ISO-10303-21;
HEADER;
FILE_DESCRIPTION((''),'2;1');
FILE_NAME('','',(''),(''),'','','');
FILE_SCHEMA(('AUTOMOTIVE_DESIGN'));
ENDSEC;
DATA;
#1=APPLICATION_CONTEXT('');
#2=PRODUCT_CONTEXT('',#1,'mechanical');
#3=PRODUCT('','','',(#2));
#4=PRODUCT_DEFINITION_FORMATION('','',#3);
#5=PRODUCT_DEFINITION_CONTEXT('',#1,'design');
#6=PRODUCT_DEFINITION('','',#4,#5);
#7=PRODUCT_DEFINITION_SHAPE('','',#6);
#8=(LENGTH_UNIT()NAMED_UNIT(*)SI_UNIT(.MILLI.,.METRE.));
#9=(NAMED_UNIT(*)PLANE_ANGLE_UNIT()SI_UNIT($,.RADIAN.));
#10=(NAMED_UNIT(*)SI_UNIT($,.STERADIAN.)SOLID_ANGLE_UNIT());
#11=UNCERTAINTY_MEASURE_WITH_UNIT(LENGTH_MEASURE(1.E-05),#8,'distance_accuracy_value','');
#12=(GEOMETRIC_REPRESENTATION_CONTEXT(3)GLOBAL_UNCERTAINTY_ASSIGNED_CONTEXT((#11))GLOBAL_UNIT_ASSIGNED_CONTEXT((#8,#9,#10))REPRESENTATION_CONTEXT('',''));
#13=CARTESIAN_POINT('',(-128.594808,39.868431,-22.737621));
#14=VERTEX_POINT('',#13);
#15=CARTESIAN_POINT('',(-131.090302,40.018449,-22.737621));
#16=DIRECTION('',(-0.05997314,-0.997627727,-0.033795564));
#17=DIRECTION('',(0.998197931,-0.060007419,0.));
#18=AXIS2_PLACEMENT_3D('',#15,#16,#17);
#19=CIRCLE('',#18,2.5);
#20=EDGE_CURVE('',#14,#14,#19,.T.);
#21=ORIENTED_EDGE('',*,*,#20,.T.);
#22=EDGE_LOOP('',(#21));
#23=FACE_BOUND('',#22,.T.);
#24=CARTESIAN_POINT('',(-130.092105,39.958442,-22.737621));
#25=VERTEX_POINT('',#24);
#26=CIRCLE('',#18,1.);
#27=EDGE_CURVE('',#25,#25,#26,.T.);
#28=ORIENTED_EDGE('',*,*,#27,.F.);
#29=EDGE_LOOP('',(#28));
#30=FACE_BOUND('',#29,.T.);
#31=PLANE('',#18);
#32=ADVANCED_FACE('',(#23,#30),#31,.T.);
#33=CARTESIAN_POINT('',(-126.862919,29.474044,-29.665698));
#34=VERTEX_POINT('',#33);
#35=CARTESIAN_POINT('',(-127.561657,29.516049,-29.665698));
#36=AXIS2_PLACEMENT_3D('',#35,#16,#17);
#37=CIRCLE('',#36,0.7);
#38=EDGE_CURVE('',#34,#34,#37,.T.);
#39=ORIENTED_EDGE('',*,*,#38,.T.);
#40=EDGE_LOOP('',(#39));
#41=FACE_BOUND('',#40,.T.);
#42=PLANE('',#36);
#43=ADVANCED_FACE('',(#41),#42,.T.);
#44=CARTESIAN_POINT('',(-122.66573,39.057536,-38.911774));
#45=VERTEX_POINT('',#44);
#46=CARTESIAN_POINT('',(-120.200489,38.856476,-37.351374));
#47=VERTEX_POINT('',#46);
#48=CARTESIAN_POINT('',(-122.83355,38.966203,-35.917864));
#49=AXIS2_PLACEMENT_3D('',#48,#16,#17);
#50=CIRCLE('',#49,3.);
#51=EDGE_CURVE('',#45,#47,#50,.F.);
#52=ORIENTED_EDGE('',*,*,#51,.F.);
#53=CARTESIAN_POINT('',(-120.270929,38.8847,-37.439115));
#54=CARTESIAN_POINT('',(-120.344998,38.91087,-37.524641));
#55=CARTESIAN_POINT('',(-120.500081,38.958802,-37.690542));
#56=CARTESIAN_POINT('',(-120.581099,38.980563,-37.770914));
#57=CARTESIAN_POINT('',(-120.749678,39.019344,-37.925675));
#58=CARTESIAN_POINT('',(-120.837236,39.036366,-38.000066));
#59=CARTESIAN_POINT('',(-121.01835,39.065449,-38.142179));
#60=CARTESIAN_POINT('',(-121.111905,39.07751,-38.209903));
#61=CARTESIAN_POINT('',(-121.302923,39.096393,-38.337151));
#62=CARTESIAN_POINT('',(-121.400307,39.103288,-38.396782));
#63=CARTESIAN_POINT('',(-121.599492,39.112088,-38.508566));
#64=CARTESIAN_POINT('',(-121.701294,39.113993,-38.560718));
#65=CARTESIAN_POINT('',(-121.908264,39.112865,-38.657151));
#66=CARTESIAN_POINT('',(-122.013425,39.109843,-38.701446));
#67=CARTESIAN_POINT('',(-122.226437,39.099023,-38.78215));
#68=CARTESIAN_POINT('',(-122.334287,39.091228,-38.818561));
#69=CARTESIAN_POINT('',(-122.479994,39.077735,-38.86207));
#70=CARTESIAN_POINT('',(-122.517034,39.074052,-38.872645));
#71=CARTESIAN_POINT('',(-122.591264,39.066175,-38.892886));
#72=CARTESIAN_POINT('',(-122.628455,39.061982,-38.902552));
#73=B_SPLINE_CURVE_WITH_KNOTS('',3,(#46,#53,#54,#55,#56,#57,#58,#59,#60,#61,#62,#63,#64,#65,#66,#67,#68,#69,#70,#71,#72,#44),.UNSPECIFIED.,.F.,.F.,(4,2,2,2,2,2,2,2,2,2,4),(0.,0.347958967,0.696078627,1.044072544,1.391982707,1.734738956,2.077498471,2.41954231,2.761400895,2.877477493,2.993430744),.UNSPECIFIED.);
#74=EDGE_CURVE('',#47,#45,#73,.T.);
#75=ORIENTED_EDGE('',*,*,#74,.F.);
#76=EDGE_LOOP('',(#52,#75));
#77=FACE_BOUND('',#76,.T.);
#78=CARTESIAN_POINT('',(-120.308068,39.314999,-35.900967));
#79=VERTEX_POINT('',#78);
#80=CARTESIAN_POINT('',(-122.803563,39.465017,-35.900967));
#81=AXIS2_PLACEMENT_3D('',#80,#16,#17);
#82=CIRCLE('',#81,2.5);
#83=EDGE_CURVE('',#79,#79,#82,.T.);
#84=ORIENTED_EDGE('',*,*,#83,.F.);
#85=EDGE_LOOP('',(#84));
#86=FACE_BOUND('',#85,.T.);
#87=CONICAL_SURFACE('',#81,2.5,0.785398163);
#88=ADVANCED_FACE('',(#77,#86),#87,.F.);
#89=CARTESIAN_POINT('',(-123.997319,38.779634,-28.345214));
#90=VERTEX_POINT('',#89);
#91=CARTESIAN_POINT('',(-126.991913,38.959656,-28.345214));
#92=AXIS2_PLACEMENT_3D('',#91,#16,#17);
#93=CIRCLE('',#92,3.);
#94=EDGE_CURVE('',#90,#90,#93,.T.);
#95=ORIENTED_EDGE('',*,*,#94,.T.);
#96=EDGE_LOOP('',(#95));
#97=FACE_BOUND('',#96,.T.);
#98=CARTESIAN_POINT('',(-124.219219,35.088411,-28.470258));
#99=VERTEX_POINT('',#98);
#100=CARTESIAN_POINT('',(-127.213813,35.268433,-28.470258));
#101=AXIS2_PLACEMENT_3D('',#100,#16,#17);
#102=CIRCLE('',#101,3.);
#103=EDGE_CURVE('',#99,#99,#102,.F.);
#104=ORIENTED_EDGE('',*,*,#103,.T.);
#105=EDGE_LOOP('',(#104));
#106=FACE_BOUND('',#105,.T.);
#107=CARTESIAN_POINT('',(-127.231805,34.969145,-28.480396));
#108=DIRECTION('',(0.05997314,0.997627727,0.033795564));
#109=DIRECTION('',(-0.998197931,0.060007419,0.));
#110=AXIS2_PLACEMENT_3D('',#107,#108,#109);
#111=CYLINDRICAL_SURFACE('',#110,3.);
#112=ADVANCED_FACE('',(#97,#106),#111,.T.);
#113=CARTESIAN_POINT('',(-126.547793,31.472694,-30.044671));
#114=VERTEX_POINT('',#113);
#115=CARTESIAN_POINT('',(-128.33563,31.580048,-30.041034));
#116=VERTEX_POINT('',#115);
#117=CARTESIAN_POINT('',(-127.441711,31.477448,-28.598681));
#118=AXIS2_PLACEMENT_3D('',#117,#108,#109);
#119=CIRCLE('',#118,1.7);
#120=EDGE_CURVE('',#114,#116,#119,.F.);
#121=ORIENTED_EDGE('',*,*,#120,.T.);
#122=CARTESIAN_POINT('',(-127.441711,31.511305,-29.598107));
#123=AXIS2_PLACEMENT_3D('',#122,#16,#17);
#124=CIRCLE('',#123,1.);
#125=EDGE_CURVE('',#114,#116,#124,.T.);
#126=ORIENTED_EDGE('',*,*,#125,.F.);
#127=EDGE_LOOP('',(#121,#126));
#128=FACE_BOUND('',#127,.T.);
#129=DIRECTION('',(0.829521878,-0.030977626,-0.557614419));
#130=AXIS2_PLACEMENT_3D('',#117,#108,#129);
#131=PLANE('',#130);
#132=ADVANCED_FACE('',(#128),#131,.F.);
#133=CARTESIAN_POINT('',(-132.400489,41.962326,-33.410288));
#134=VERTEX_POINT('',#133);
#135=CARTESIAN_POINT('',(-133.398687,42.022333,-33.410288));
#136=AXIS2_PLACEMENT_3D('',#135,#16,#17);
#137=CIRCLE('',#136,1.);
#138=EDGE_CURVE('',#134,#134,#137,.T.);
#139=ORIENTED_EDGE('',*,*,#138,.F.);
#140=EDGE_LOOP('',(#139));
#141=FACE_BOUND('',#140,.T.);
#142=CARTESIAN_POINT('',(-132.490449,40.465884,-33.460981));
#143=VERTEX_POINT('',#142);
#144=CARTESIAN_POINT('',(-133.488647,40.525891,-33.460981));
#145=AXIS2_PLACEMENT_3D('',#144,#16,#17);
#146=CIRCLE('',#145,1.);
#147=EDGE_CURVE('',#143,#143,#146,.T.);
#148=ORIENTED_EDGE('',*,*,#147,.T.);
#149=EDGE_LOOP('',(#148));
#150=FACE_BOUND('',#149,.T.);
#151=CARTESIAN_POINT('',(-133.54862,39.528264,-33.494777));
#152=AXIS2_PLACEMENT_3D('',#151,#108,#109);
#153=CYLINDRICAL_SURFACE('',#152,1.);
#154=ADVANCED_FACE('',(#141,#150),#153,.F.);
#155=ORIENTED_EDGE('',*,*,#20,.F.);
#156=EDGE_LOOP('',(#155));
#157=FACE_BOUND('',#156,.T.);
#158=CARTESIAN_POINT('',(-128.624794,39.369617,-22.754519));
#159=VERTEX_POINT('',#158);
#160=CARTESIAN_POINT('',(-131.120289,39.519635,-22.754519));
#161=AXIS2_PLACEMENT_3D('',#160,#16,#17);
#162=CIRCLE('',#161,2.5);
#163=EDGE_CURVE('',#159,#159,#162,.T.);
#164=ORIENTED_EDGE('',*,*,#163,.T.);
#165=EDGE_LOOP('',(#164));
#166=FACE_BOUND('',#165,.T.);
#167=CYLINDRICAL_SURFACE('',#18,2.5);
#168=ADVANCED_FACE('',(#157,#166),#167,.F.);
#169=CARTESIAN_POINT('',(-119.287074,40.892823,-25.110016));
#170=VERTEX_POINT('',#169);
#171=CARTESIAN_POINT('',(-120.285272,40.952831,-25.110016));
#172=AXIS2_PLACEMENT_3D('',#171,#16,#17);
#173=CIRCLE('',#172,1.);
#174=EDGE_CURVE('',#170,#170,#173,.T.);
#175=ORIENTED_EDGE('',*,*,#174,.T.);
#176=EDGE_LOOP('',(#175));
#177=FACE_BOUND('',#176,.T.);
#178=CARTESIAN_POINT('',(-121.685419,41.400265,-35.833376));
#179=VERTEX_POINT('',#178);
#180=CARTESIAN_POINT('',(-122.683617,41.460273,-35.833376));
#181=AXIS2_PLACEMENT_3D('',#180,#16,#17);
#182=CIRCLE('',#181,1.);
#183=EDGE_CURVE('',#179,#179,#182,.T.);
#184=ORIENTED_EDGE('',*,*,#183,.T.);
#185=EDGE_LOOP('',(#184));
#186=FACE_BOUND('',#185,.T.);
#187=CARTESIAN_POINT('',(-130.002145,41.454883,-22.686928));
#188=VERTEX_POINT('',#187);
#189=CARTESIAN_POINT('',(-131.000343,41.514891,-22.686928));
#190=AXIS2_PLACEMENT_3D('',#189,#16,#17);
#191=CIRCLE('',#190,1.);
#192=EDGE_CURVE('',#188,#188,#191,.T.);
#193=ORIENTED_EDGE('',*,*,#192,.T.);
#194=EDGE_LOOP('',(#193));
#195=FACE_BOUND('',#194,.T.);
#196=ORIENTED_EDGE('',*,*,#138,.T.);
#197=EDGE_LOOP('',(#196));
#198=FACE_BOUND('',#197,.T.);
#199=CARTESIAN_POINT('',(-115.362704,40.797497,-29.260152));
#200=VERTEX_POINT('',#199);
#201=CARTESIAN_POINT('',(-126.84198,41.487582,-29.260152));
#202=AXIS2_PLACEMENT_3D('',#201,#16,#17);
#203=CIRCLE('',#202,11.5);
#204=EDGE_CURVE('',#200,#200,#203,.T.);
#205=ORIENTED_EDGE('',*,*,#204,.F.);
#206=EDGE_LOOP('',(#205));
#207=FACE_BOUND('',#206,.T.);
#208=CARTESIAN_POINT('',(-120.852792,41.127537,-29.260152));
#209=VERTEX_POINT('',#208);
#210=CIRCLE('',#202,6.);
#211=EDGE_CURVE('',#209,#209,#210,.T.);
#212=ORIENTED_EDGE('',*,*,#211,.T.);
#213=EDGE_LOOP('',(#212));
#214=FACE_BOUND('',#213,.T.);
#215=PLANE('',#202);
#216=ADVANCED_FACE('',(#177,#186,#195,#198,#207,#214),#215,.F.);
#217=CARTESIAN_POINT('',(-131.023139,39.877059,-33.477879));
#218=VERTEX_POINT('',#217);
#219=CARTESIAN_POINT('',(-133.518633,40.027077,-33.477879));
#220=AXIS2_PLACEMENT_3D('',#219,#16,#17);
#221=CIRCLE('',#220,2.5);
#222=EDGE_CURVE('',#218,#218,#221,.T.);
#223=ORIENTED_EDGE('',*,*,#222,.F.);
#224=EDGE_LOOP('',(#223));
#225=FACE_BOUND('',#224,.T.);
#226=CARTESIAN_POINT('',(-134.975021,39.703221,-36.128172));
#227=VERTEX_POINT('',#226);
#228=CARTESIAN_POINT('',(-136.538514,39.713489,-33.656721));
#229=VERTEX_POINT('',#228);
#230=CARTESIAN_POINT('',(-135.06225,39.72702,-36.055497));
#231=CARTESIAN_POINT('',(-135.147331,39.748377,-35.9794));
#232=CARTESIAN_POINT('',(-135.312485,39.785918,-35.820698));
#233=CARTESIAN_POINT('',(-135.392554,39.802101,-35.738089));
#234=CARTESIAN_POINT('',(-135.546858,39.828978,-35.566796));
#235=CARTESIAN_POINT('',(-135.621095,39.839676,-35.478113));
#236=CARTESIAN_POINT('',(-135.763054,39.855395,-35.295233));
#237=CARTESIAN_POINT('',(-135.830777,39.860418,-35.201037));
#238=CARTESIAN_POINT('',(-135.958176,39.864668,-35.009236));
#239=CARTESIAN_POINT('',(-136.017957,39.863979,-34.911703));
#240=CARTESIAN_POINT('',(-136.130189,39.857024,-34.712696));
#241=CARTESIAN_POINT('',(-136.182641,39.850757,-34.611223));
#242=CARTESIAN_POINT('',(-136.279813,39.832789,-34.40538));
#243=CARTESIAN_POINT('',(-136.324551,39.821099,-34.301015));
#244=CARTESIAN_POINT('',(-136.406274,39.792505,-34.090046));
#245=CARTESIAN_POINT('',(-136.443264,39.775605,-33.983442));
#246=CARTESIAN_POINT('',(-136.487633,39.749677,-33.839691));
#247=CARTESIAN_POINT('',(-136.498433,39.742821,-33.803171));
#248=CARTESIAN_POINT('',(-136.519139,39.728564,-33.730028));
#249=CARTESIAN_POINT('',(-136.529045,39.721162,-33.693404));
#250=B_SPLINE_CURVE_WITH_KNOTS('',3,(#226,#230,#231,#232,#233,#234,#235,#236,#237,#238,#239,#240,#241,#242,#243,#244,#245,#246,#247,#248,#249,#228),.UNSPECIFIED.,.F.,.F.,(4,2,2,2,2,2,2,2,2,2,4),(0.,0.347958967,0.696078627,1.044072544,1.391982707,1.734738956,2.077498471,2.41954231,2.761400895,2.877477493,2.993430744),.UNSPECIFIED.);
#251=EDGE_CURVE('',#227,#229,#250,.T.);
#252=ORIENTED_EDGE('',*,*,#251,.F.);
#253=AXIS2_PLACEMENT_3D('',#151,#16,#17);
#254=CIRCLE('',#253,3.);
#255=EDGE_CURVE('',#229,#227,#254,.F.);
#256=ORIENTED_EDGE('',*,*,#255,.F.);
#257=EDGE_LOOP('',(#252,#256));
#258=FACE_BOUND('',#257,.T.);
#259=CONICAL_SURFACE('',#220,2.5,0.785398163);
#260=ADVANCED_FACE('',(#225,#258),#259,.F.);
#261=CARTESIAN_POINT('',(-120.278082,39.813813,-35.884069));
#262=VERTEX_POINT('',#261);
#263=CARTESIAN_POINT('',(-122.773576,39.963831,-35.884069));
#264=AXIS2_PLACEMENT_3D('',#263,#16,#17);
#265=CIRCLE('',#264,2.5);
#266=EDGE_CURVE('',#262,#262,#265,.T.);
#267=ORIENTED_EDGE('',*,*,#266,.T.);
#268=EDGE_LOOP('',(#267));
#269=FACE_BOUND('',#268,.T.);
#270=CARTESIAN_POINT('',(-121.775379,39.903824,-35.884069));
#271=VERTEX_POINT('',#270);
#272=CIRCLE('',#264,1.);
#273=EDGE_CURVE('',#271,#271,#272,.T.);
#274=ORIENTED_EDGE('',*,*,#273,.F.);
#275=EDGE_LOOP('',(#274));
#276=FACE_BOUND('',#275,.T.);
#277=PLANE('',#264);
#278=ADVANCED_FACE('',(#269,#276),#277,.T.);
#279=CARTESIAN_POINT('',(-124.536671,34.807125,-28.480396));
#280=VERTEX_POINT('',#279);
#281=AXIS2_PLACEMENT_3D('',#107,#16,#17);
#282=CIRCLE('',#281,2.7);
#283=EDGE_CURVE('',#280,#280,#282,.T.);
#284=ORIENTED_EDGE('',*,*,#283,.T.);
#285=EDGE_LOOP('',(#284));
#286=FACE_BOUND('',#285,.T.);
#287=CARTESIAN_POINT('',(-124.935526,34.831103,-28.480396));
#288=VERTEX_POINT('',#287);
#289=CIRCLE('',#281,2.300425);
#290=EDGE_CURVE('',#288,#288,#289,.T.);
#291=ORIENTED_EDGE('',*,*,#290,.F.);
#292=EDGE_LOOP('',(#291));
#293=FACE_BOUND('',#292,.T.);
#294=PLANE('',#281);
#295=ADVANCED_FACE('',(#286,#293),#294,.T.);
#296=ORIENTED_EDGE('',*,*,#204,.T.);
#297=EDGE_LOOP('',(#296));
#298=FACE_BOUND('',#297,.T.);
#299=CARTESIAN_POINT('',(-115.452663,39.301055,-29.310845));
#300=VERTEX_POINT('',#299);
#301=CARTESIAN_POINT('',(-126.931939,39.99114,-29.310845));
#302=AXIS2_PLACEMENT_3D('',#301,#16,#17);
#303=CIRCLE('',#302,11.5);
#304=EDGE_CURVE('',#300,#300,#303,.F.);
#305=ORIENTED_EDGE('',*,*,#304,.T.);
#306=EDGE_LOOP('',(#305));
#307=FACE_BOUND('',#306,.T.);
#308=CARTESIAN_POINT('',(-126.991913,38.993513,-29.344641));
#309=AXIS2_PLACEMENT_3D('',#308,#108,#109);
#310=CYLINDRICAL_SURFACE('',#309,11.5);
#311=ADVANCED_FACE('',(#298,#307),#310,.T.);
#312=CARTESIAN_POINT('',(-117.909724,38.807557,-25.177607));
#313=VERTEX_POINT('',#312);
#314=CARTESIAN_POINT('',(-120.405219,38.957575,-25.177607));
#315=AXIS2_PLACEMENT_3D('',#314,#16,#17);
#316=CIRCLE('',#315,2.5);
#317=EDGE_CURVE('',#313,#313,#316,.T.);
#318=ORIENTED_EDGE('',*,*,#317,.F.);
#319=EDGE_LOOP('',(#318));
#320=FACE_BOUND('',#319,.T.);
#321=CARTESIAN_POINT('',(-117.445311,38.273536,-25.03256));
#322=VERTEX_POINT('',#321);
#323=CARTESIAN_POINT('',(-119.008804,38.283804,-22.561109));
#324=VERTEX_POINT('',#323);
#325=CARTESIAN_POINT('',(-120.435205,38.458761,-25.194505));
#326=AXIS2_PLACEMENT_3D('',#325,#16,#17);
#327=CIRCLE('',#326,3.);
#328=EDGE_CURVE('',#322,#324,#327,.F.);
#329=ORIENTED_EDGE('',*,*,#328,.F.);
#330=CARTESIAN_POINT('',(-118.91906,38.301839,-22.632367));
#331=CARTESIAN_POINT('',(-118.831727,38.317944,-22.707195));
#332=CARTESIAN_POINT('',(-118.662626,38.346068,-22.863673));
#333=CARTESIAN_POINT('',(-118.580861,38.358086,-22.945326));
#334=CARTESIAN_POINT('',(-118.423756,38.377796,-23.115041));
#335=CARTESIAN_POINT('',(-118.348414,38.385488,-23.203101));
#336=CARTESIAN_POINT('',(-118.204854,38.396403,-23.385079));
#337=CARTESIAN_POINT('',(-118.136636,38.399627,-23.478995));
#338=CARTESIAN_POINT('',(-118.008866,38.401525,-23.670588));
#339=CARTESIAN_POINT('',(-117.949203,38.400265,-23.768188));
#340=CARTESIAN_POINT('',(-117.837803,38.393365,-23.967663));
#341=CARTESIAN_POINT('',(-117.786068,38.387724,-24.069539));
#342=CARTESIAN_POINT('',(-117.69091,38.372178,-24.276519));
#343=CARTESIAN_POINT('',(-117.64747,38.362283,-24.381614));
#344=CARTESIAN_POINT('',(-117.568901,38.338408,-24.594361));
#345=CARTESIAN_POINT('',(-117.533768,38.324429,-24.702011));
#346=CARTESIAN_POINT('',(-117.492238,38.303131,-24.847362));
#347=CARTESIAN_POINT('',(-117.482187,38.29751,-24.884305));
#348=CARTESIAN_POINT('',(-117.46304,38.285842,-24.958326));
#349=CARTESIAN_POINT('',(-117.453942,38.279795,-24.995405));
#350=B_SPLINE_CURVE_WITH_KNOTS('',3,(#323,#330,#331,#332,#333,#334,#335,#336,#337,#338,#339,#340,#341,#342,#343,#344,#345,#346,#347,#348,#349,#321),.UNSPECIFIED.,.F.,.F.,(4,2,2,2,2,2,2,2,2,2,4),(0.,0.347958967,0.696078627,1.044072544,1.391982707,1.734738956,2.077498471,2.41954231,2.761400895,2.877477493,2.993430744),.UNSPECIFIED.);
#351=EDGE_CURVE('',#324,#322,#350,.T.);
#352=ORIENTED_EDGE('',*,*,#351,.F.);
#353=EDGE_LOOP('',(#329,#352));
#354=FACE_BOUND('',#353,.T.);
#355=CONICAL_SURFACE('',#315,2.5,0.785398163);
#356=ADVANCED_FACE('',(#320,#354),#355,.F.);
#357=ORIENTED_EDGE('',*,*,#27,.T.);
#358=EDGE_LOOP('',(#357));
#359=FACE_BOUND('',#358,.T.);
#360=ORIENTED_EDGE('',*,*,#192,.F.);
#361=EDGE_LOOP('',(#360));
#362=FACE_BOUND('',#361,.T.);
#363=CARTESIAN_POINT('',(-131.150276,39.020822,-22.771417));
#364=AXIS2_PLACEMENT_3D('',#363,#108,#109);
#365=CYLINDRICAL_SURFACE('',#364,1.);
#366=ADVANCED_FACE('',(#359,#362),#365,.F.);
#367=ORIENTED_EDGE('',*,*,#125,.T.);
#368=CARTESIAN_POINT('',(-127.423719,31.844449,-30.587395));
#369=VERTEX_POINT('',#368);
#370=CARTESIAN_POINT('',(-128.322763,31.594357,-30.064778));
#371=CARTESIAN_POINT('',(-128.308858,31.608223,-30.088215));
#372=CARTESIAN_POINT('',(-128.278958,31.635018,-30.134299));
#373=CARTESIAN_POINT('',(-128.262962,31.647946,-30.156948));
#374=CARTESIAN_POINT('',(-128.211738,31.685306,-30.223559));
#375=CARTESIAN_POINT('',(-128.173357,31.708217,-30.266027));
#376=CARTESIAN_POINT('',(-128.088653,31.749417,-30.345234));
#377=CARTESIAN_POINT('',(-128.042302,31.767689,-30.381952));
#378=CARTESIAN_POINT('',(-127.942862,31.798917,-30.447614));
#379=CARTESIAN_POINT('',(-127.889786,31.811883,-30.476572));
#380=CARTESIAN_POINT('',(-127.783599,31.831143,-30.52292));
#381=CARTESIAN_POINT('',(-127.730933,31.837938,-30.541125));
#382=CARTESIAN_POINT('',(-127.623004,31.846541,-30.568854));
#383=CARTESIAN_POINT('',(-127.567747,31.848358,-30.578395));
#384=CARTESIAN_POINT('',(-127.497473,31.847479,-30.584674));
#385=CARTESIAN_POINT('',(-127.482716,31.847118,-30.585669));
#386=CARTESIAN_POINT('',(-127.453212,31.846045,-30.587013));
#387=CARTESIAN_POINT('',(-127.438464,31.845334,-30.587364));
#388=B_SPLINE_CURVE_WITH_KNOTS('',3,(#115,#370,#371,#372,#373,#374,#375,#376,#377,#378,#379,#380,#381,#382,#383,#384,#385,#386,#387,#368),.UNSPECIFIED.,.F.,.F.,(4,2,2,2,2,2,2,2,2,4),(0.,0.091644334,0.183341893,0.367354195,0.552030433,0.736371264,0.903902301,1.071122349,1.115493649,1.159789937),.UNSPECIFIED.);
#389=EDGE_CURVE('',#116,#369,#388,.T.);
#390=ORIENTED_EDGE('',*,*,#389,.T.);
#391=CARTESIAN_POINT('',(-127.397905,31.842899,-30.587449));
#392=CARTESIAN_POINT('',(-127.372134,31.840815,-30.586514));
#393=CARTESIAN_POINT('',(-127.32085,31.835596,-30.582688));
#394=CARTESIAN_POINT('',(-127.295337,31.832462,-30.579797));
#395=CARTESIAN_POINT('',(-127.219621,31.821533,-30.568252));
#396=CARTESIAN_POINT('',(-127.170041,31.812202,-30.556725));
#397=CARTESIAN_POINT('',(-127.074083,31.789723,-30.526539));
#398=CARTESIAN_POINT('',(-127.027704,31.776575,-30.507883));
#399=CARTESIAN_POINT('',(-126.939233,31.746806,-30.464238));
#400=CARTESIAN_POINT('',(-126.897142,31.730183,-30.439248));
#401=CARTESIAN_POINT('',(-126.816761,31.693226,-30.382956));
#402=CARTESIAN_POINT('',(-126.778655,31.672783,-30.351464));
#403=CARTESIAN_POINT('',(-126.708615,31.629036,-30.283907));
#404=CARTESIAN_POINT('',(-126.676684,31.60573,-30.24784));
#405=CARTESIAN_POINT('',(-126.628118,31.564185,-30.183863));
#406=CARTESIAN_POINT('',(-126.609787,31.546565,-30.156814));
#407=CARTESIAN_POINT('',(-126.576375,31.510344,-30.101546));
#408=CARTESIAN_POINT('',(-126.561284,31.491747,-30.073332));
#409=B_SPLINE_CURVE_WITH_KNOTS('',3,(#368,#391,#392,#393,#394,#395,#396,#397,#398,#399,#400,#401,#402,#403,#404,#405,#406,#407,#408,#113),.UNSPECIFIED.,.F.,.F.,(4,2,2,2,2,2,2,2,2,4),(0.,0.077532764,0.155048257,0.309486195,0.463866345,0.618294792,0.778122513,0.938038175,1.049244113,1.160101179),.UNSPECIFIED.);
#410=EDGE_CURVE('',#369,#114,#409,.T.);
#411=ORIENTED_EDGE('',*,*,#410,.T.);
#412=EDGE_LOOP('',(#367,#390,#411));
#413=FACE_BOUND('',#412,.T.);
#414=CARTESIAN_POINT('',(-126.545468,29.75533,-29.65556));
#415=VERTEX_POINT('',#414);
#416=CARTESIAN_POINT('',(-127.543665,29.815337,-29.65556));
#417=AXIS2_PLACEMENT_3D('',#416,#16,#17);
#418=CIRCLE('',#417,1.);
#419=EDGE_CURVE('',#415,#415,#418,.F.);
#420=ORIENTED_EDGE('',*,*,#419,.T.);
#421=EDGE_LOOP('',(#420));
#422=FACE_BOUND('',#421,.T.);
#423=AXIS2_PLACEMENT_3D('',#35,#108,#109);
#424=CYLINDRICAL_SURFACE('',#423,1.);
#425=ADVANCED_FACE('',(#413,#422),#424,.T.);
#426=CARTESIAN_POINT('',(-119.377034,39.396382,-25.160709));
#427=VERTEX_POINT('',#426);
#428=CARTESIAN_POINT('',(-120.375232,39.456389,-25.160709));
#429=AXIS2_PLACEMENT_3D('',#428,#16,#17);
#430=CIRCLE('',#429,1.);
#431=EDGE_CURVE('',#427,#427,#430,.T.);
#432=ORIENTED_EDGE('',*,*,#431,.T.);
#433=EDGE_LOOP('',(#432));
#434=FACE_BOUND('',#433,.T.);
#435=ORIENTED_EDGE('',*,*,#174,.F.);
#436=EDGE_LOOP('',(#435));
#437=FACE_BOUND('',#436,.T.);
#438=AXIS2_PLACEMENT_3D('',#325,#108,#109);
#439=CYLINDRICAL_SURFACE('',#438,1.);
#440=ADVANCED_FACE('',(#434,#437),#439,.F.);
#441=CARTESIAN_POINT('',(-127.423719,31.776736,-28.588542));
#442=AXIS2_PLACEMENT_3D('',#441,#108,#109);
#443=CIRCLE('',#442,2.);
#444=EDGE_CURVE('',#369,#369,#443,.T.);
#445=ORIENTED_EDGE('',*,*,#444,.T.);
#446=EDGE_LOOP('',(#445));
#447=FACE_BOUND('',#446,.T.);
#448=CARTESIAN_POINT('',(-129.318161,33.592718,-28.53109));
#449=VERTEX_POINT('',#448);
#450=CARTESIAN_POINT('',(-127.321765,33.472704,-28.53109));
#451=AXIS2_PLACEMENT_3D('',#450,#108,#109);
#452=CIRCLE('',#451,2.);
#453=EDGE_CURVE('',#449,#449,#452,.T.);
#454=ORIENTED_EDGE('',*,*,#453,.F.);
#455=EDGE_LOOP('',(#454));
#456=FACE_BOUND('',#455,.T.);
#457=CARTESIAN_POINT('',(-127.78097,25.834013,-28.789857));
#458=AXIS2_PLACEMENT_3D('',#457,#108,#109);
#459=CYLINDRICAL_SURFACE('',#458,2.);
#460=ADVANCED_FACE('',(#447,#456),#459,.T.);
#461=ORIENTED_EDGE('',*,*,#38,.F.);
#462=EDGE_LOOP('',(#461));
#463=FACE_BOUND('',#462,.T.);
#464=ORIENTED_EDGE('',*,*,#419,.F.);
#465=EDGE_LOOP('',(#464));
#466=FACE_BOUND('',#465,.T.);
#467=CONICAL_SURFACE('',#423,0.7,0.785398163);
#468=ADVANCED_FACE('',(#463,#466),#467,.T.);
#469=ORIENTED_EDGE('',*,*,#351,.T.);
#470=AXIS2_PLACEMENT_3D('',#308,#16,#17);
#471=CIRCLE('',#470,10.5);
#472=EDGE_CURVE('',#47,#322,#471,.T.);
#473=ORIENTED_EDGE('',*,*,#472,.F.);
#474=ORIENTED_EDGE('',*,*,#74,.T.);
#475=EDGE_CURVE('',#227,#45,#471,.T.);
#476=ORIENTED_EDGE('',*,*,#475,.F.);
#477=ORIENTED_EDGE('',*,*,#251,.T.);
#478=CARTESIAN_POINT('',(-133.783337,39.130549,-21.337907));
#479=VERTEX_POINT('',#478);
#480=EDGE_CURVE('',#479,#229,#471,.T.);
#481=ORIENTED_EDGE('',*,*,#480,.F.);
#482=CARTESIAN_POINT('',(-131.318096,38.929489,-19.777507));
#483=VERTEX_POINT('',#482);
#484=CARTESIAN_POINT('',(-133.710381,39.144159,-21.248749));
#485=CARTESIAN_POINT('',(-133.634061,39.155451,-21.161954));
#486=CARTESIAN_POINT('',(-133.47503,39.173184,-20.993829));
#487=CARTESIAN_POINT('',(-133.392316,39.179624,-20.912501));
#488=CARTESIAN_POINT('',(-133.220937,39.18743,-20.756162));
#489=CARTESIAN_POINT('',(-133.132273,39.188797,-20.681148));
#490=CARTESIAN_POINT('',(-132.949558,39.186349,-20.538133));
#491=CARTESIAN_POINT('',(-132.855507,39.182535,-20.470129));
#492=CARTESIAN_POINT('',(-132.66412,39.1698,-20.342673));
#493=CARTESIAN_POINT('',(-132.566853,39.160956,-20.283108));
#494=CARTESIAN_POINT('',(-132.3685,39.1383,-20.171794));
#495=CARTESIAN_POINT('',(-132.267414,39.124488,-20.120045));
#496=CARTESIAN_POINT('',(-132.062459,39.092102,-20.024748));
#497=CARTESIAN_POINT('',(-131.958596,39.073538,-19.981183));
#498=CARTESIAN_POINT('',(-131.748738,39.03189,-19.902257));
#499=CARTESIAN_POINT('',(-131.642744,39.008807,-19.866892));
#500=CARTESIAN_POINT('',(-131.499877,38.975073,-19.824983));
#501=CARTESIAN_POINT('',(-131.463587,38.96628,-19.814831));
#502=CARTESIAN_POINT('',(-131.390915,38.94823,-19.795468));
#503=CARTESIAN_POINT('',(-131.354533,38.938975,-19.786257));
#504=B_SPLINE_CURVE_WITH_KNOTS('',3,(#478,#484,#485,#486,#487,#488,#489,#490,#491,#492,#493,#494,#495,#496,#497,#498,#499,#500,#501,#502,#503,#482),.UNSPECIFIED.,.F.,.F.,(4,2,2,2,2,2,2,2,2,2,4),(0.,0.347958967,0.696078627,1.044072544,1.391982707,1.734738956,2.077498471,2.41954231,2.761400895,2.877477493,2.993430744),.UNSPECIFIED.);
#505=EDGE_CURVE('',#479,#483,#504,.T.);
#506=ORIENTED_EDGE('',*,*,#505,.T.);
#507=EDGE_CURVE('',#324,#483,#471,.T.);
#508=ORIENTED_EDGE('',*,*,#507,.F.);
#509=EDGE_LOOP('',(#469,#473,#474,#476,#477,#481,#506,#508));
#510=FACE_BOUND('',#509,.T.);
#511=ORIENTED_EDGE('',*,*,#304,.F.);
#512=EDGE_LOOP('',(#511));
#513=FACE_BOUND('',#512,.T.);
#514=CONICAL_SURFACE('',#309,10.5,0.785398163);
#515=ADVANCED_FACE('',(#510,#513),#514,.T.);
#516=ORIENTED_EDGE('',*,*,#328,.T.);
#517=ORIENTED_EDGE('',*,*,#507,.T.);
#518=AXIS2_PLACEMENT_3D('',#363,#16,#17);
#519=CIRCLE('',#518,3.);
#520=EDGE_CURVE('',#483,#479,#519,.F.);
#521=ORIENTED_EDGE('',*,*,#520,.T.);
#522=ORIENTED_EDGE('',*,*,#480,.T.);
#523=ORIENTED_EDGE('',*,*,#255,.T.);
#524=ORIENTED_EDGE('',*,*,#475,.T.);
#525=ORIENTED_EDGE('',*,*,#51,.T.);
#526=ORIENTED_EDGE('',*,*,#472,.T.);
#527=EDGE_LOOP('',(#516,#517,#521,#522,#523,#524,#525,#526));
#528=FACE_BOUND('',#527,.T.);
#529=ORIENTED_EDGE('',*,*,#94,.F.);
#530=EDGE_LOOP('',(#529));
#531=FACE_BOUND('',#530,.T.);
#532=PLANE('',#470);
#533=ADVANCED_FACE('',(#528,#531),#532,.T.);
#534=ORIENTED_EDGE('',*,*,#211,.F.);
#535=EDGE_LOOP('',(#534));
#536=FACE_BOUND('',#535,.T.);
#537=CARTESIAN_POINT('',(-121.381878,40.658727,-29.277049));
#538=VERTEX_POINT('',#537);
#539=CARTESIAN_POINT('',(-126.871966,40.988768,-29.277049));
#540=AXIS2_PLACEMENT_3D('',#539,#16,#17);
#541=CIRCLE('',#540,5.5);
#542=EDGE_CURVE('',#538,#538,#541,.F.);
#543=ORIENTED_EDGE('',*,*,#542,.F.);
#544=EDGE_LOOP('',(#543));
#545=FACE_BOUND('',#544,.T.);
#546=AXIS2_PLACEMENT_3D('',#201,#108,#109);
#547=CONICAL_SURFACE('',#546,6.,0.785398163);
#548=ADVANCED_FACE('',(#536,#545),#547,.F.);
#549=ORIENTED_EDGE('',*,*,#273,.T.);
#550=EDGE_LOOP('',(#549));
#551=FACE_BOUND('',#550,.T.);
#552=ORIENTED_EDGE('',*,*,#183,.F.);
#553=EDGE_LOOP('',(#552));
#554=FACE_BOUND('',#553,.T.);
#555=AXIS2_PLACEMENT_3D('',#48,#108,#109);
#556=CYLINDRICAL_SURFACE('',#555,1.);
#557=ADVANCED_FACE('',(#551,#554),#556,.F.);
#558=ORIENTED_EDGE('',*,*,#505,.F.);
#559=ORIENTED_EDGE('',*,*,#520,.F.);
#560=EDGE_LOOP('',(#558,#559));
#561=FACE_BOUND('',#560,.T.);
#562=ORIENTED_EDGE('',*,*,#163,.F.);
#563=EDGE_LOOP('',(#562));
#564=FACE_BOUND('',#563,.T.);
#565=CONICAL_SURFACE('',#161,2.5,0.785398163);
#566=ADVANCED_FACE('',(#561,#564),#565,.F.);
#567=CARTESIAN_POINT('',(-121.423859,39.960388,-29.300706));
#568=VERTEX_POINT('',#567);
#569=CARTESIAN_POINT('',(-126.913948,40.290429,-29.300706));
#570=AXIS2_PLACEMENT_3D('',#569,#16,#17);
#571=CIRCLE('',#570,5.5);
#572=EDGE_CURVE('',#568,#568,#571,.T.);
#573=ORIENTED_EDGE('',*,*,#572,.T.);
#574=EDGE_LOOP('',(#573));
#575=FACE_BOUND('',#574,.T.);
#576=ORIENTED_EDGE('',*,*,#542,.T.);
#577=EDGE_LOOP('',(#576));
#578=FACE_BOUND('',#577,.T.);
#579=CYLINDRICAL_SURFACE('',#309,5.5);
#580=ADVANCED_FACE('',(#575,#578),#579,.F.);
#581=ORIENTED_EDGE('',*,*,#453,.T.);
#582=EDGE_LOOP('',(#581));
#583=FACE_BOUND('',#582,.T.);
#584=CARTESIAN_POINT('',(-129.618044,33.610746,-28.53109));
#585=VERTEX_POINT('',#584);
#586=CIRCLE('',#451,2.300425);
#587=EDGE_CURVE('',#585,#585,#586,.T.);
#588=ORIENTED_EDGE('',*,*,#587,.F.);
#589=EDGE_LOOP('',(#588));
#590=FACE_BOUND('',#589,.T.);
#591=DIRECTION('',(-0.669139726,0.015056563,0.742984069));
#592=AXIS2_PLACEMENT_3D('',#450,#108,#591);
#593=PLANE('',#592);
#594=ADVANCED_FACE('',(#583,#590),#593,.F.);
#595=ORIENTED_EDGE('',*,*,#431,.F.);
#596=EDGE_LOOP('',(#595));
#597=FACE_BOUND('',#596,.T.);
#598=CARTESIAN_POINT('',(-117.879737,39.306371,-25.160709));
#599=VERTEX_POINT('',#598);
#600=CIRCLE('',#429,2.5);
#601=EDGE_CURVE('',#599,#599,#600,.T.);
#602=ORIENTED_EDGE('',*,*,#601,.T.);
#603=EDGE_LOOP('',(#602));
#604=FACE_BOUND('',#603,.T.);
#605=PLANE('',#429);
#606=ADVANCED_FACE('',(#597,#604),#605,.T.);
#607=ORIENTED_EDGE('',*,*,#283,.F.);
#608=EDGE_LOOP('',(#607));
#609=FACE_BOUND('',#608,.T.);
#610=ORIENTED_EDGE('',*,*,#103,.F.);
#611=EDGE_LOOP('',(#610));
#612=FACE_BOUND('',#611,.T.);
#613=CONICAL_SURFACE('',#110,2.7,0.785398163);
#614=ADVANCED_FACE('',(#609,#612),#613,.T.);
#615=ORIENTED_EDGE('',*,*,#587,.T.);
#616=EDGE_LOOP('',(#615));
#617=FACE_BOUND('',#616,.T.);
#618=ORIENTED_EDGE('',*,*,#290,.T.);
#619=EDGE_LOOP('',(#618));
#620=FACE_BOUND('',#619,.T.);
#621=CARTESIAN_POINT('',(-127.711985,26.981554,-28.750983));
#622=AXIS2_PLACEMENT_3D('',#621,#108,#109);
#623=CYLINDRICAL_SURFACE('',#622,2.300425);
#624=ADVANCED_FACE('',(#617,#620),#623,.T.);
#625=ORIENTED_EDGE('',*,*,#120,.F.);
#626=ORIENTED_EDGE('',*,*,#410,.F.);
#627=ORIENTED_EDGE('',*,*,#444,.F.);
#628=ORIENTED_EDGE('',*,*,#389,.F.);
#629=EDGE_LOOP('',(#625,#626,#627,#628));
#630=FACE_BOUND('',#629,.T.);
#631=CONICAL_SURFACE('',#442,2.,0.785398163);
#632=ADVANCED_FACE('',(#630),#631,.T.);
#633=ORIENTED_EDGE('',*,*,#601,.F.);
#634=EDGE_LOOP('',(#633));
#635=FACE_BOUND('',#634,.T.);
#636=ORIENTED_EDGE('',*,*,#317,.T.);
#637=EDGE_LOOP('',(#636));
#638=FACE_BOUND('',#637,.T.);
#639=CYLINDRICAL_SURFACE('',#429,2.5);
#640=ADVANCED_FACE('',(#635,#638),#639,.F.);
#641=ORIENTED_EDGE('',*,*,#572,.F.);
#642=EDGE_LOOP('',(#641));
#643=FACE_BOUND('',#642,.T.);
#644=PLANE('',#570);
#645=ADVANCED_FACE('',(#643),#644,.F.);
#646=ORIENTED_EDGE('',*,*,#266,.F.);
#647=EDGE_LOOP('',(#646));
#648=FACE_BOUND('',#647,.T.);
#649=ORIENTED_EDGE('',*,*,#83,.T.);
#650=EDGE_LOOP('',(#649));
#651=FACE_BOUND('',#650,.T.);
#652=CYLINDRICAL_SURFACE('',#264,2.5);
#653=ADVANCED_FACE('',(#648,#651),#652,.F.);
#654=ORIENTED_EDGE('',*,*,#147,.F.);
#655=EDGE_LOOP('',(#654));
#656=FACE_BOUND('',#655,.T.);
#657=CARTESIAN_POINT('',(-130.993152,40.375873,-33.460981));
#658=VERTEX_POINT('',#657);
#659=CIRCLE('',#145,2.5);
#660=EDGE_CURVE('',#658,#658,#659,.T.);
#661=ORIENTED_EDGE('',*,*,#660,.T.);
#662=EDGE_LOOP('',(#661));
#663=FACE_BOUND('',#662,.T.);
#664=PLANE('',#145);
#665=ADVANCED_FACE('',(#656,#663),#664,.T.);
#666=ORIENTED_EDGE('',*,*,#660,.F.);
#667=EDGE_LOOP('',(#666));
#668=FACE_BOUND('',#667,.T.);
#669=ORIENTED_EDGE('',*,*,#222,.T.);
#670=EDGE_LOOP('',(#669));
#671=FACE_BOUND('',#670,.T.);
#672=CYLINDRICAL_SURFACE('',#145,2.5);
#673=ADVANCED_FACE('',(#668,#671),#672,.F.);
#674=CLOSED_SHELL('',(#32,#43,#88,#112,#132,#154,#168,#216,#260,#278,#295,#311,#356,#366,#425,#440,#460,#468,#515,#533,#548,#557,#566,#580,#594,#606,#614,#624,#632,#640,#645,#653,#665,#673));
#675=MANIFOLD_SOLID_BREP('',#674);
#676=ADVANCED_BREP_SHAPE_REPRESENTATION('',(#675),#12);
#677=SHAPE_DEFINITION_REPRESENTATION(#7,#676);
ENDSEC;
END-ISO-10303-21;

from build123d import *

# Parameters (mm, degrees)
SKETCH_1_R          = 11.5
SKETCH_1_R_2        = 5.5
SKETCH_1_R_3        = 1
EXTRUDE_1_DEPTH     = 2.5
EXTRUDE_START       = -1.3
SKETCH_2_R          = 5.5
EXTRUDE_2_DEPTH     = 1.3
SKETCH_5_R          = 2.5
CUT_EXTRUDE_1_DEPTH = 1
SKETCH_6_R          = 2
EXTRUDE_3_DEPTH     = 7.5
SKETCH_7_R          = 3
EXTRUDE_4_DEPTH     = 4
SKETCH_10_R         = 1
EXTRUDE_5_DEPTH     = 2
CHAMFER_1_SIZE      = 0.3
SKETCH_11_R         = 2.300425052
EXTRUDE_6_DEPTH     = 1.5
CHAMFER_2_SIZE      = 1
CHAMFER_3_SIZE      = 0.5
CHAMFER_4_SIZE      = 0.5


with BuildPart() as part:
    # 草图1 → 凸台-拉伸1 (new body)
    with BuildSketch(Plane(origin=(1.966710395, 32.715392416, 1.10826425), x_dir=(0.9981999912017503, -0.059938758009620605, -0.002030480999629514), z_dir=(-0.05997314036154614, -0.9976277272985652, -0.03379556421002548))):
        with Locations(Location((-129.040965006, -30.648001563, 0), (0, 0, 0.116404566))):
            Circle(SKETCH_1_R)
        with Locations(Location((-129.040965006, -30.648001563, 0), (0, 0, 0.116404566))):
            Circle(SKETCH_1_R_2, mode=Mode.SUBTRACT)
        with Locations(Location((-135.609495823, -34.813863168, 0), (0, 0, 0.116404566))):
            Circle(SKETCH_1_R_3, mode=Mode.SUBTRACT)
        with Locations(Location((-133.206826611, -24.079470746, 0), (0, 0, 0.116404566))):
            Circle(SKETCH_1_R_3, mode=Mode.SUBTRACT)
        with Locations(Location((-122.472434189, -26.482139959, 0), (0, 0, 0.116404566))):
            Circle(SKETCH_1_R_3, mode=Mode.SUBTRACT)
        with Locations(Location((-124.875103402, -37.21653238, 0), (0, 0, 0.116404566))):
            Circle(SKETCH_1_R_3, mode=Mode.SUBTRACT)
    extrude(amount=EXTRUDE_1_DEPTH)

    # 草图2 → 凸台-拉伸2 (add)
    with BuildSketch(Plane(origin=(1.816777544, 30.221323097, 1.02377534), x_dir=(0.9981999912017503, -0.059938758009620605, -0.002030480999629515), z_dir=(-0.05997314036154614, -0.9976277272985652, -0.03379556421002549)).offset(EXTRUDE_START)):
        with Locations(Location((-129.040965006, -30.648001563, 0), (0, 0, 0.116404566))):
            Circle(SKETCH_2_R)
    extrude(amount=EXTRUDE_2_DEPTH)

    # 草图5 → 切除-拉伸1 (cut)
    with BuildSketch(Plane(origin=(1.816777544, 30.221323097, 1.02377534), x_dir=(0.9981999912017503, -0.059938758009620605, -0.002030480999629515), z_dir=(-0.05997314036154614, -0.9976277272985652, -0.03379556421002564))):
        with Locations(Location((-135.609495823, -34.813863168, 0), (0, 0, 0.116404566))):
            Circle(SKETCH_5_R)
        with Locations(Location((-133.206826611, -24.079470746, 0), (0, 0, 0.116404566))):
            Circle(SKETCH_5_R)
        with Locations(Location((-122.472434189, -26.482139959, 0), (0, 0, 0.116404566))):
            Circle(SKETCH_5_R)
        with Locations(Location((-124.875103402, -37.21653238, 0), (0, 0, 0.116404566))):
            Circle(SKETCH_5_R)
    extrude(amount=-CUT_EXTRUDE_1_DEPTH, mode=Mode.SUBTRACT)

    # 草图6 → 凸台-拉伸3 (add)
    with BuildSketch(Plane(origin=(1.816777544, 30.221323097, 1.02377534), x_dir=(0.9981999912017503, -0.059938758009620605, -0.002030480999629515), z_dir=(-0.05997314036154614, -0.9976277272985652, -0.033795564210025573))):
        with Locations(Location((-129.040965006, -29.648001563, 0), (0, 0, 180.116404566))):
            Circle(SKETCH_6_R)
    extrude(amount=EXTRUDE_3_DEPTH)

    # 草图7 → 凸台-拉伸4 (add)
    with BuildSketch(Plane(origin=(1.816777544, 30.221323097, 1.02377534), x_dir=(0.9981999912017503, -0.059938758009620605, -0.002030480999629515), z_dir=(-0.05997314036154614, -0.9976277272985652, -0.033795564210025615))):
        with Locations(Location((-129.040965006, -29.648001563, 0), (0, 0, 0.116404566))):
            Circle(SKETCH_7_R)
    extrude(amount=EXTRUDE_4_DEPTH)

    # 草图10 → 凸台-拉伸5 (add)
    with BuildSketch(Plane(origin=(1.366978991, 22.739115143, 0.770308608), x_dir=(0.9981999912017503, -0.05993875800962059, -0.002030480999629514), z_dir=(-0.05997314036154613, -0.9976277272985652, -0.03379556421002559))):
        with Locations(Location((-129.040965006, -30.648001563, 0), (0, 0, 269.999999999))):
            Circle(SKETCH_10_R)
    extrude(amount=EXTRUDE_5_DEPTH)

    # 倒角1
    # the kernel refuses this chamfer: 0.3 mm, written as the material it takes off along each edge
    with BuildSketch(Plane(origin=(-127.441711143, 31.477448067, -28.598680652), x_dir=(-1.5916157281026276e-11, 0.0338565062200545, -0.9994267041592252), z_dir=(-0.9981999912017503, 0.059938758009080766, 0.002030481015565288))) as chamfer_1_piece_1_section:
        Polygon((2, -CHAMFER_1_SIZE), (2 - CHAMFER_1_SIZE, 0), (2, 0), align=None)
    chamfer_1_piece_1 = revolve(axis=Axis((-127.441711143, 31.477448067, -28.598680652), (-0.05997314036154614, -0.9976277272985652, -0.03379556421002558)), revolution_arc=270.116404567, mode=Mode.PRIVATE)
    chamfer_1_piece_1 = chamfer_1_piece_1 - Plane(origin=(-127.43302189, 31.655846599, -29.593210861), x_dir=(-1.742146691663825e-11, 0.03385650622014407, -0.9994267041592222), z_dir=(0.05997314036154613, 0.9976277272985653, 0.033795564210025594)) * Cylinder(1, 8, mode=Mode.PRIVATE)
    add(chamfer_1_piece_1, mode=Mode.SUBTRACT)
    with BuildSketch(Plane(origin=(-127.231805152, 34.969145112, -28.480396177), x_dir=(0.9981979311307728, -0.060007418593410425, 2.631376598098256e-12), z_dir=(0.0020279845707766217, 0.033734662275686965, -0.9994287667661592))) as chamfer_1_piece_2:
        Polygon((3, -CHAMFER_1_SIZE), (3 - CHAMFER_1_SIZE, 0), (3, 0), align=None)
    revolve(axis=Axis((-127.231805152, 34.969145112, -28.480396177), (-0.05997314036154614, -0.9976277272985652, -0.03379556421002563)), mode=Mode.SUBTRACT)
    with BuildSketch(Plane(origin=(-127.561657424, 29.516049118, -29.665698484), x_dir=(-1.7422507880890286e-11, 0.03385650622014249, -0.9994267041592222), z_dir=(-0.9981999912017504, 0.05993875800902966, 0.0020304810170733417))) as chamfer_1_piece_3:
        Polygon((1, -CHAMFER_1_SIZE), (1 - CHAMFER_1_SIZE, 0), (1, 0), align=None)
    revolve(axis=Axis((-127.561657424, 29.516049118, -29.665698484), (-0.05997314036154613, -0.9976277272985653, -0.033795564210025594)), mode=Mode.SUBTRACT)
    with BuildSketch(Plane(origin=(-127.441711143, 31.477448067, -28.598680652), x_dir=(-0.9981979311307727, 0.060007418593412805, -2.629008122312364e-12), z_dir=(-0.0020279845707743367, -0.03373466227568705, 0.9994287667661592))) as chamfer_1_piece_4_section:
        Polygon((2, -CHAMFER_1_SIZE), (2 - CHAMFER_1_SIZE, 0), (2, 0), align=None)
    chamfer_1_piece_4 = revolve(axis=Axis((-127.441711143, 31.477448067, -28.598680652), (-0.05997314036154614, -0.9976277272985652, -0.03379556421002558)), revolution_arc=89.883595433, mode=Mode.PRIVATE)
    chamfer_1_piece_4 = chamfer_1_piece_4 - Plane(origin=(-127.432917992, 31.657574909, -29.593152313), x_dir=(-1.742146691663825e-11, 0.03385650622014407, -0.9994267041592222), z_dir=(0.05997314036154613, 0.9976277272985653, 0.033795564210025594)) * Cylinder(1, 9, mode=Mode.PRIVATE)
    add(chamfer_1_piece_4, mode=Mode.SUBTRACT)

    # 草图11 → 凸台-拉伸6 (add)
    with BuildSketch(Plane(origin=(1.576884982, 26.230812188, 0.888593083), x_dir=(0.9981999912017503, -0.059938758009620605, -0.0020304809996295197), z_dir=(-0.05997314036154614, -0.9976277272985652, -0.03379556421002562))):
        with Locations(Location((-129.040965006, -29.648001563, 0), (0, 0, 180.116404566))):
            Circle(SKETCH_11_R)
    extrude(amount=EXTRUDE_6_DEPTH)

    # 倒角2
    chamfer_2_edges = [part.edges().sort_by_distance(p)[0] for p in [
        (-138.471188798, 39.683597842, -29.344640624),
    ]]
    chamfer(chamfer_2_edges, length=CHAMFER_2_SIZE)

    # 倒角3
    # the kernel refuses this chamfer: 0.5 mm, written as the material it takes off along each edge
    with BuildSketch(Plane(origin=(-122.833549573, 38.966203462, -35.917864433), x_dir=(0.9981979311307727, -0.06000741859341191, 2.6318502932554117e-12), z_dir=(0.0020279845707771465, 0.03373466227568696, -0.9994287667661592))) as chamfer_3_piece_1:
        Polygon((2.5 + CHAMFER_3_SIZE, 0), (2.5, -CHAMFER_3_SIZE), (2.5, 0), align=None)
    revolve(axis=Axis((-122.833549573, 38.966203462, -35.917864433), (-0.05997314036154614, -0.9976277272985652, -0.03379556421002566)), mode=Mode.SUBTRACT)
    with BuildSketch(Plane(origin=(-120.435205187, 38.458761429, -25.194504568), x_dir=(0.9981979311307725, -0.06000741859341508, 2.6304292077839058e-12), z_dir=(0.002027984570775836, 0.033734662275687034, -0.9994287667661591))) as chamfer_3_piece_2:
        Polygon((2.5 + CHAMFER_3_SIZE, 0), (2.5, -CHAMFER_3_SIZE), (2.5, 0), align=None)
    revolve(axis=Axis((-120.435205187, 38.458761429, -25.194504568), (-0.05997314036154614, -0.9976277272985652, -0.03379556421002566)), mode=Mode.SUBTRACT)
    with BuildSketch(Plane(origin=(-131.150275607, 39.020821594, -22.771416816), x_dir=(0.9981979311307727, -0.06000741859341225, 2.633271378726947e-12), z_dir=(0.0020279845707785755, 0.033734662275686875, -0.9994287667661592))) as chamfer_3_piece_3:
        Polygon((2.5 + CHAMFER_3_SIZE, 0), (2.5, -CHAMFER_3_SIZE), (2.5, 0), align=None)
    revolve(axis=Axis((-131.150275607, 39.020821594, -22.771416816), (-0.05997314036154614, -0.9976277272985652, -0.03379556421002566)), mode=Mode.SUBTRACT)
    with BuildSketch(Plane(origin=(-133.548619994, 39.528263626, -33.494776681), x_dir=(0.9981979311307727, -0.06000741859341225, 2.6318502932554267e-12), z_dir=(0.0020279845707771578, 0.03373466227568696, -0.9994287667661592))) as chamfer_3_piece_4:
        Polygon((2.5 + CHAMFER_3_SIZE, 0), (2.5, -CHAMFER_3_SIZE), (2.5, 0), align=None)
    revolve(axis=Axis((-133.548619994, 39.528263626, -33.494776681), (-0.05997314036154614, -0.9976277272985652, -0.03379556421002566)), mode=Mode.SUBTRACT)

    # 倒角4
    chamfer_4_edges = [part.edges().sort_by_distance(p)[0] for p in [
        (-132.33206836, 41.817622648, -29.260151714),
    ]]
    chamfer(chamfer_4_edges, length=CHAMFER_4_SIZE)


solid = part.part
